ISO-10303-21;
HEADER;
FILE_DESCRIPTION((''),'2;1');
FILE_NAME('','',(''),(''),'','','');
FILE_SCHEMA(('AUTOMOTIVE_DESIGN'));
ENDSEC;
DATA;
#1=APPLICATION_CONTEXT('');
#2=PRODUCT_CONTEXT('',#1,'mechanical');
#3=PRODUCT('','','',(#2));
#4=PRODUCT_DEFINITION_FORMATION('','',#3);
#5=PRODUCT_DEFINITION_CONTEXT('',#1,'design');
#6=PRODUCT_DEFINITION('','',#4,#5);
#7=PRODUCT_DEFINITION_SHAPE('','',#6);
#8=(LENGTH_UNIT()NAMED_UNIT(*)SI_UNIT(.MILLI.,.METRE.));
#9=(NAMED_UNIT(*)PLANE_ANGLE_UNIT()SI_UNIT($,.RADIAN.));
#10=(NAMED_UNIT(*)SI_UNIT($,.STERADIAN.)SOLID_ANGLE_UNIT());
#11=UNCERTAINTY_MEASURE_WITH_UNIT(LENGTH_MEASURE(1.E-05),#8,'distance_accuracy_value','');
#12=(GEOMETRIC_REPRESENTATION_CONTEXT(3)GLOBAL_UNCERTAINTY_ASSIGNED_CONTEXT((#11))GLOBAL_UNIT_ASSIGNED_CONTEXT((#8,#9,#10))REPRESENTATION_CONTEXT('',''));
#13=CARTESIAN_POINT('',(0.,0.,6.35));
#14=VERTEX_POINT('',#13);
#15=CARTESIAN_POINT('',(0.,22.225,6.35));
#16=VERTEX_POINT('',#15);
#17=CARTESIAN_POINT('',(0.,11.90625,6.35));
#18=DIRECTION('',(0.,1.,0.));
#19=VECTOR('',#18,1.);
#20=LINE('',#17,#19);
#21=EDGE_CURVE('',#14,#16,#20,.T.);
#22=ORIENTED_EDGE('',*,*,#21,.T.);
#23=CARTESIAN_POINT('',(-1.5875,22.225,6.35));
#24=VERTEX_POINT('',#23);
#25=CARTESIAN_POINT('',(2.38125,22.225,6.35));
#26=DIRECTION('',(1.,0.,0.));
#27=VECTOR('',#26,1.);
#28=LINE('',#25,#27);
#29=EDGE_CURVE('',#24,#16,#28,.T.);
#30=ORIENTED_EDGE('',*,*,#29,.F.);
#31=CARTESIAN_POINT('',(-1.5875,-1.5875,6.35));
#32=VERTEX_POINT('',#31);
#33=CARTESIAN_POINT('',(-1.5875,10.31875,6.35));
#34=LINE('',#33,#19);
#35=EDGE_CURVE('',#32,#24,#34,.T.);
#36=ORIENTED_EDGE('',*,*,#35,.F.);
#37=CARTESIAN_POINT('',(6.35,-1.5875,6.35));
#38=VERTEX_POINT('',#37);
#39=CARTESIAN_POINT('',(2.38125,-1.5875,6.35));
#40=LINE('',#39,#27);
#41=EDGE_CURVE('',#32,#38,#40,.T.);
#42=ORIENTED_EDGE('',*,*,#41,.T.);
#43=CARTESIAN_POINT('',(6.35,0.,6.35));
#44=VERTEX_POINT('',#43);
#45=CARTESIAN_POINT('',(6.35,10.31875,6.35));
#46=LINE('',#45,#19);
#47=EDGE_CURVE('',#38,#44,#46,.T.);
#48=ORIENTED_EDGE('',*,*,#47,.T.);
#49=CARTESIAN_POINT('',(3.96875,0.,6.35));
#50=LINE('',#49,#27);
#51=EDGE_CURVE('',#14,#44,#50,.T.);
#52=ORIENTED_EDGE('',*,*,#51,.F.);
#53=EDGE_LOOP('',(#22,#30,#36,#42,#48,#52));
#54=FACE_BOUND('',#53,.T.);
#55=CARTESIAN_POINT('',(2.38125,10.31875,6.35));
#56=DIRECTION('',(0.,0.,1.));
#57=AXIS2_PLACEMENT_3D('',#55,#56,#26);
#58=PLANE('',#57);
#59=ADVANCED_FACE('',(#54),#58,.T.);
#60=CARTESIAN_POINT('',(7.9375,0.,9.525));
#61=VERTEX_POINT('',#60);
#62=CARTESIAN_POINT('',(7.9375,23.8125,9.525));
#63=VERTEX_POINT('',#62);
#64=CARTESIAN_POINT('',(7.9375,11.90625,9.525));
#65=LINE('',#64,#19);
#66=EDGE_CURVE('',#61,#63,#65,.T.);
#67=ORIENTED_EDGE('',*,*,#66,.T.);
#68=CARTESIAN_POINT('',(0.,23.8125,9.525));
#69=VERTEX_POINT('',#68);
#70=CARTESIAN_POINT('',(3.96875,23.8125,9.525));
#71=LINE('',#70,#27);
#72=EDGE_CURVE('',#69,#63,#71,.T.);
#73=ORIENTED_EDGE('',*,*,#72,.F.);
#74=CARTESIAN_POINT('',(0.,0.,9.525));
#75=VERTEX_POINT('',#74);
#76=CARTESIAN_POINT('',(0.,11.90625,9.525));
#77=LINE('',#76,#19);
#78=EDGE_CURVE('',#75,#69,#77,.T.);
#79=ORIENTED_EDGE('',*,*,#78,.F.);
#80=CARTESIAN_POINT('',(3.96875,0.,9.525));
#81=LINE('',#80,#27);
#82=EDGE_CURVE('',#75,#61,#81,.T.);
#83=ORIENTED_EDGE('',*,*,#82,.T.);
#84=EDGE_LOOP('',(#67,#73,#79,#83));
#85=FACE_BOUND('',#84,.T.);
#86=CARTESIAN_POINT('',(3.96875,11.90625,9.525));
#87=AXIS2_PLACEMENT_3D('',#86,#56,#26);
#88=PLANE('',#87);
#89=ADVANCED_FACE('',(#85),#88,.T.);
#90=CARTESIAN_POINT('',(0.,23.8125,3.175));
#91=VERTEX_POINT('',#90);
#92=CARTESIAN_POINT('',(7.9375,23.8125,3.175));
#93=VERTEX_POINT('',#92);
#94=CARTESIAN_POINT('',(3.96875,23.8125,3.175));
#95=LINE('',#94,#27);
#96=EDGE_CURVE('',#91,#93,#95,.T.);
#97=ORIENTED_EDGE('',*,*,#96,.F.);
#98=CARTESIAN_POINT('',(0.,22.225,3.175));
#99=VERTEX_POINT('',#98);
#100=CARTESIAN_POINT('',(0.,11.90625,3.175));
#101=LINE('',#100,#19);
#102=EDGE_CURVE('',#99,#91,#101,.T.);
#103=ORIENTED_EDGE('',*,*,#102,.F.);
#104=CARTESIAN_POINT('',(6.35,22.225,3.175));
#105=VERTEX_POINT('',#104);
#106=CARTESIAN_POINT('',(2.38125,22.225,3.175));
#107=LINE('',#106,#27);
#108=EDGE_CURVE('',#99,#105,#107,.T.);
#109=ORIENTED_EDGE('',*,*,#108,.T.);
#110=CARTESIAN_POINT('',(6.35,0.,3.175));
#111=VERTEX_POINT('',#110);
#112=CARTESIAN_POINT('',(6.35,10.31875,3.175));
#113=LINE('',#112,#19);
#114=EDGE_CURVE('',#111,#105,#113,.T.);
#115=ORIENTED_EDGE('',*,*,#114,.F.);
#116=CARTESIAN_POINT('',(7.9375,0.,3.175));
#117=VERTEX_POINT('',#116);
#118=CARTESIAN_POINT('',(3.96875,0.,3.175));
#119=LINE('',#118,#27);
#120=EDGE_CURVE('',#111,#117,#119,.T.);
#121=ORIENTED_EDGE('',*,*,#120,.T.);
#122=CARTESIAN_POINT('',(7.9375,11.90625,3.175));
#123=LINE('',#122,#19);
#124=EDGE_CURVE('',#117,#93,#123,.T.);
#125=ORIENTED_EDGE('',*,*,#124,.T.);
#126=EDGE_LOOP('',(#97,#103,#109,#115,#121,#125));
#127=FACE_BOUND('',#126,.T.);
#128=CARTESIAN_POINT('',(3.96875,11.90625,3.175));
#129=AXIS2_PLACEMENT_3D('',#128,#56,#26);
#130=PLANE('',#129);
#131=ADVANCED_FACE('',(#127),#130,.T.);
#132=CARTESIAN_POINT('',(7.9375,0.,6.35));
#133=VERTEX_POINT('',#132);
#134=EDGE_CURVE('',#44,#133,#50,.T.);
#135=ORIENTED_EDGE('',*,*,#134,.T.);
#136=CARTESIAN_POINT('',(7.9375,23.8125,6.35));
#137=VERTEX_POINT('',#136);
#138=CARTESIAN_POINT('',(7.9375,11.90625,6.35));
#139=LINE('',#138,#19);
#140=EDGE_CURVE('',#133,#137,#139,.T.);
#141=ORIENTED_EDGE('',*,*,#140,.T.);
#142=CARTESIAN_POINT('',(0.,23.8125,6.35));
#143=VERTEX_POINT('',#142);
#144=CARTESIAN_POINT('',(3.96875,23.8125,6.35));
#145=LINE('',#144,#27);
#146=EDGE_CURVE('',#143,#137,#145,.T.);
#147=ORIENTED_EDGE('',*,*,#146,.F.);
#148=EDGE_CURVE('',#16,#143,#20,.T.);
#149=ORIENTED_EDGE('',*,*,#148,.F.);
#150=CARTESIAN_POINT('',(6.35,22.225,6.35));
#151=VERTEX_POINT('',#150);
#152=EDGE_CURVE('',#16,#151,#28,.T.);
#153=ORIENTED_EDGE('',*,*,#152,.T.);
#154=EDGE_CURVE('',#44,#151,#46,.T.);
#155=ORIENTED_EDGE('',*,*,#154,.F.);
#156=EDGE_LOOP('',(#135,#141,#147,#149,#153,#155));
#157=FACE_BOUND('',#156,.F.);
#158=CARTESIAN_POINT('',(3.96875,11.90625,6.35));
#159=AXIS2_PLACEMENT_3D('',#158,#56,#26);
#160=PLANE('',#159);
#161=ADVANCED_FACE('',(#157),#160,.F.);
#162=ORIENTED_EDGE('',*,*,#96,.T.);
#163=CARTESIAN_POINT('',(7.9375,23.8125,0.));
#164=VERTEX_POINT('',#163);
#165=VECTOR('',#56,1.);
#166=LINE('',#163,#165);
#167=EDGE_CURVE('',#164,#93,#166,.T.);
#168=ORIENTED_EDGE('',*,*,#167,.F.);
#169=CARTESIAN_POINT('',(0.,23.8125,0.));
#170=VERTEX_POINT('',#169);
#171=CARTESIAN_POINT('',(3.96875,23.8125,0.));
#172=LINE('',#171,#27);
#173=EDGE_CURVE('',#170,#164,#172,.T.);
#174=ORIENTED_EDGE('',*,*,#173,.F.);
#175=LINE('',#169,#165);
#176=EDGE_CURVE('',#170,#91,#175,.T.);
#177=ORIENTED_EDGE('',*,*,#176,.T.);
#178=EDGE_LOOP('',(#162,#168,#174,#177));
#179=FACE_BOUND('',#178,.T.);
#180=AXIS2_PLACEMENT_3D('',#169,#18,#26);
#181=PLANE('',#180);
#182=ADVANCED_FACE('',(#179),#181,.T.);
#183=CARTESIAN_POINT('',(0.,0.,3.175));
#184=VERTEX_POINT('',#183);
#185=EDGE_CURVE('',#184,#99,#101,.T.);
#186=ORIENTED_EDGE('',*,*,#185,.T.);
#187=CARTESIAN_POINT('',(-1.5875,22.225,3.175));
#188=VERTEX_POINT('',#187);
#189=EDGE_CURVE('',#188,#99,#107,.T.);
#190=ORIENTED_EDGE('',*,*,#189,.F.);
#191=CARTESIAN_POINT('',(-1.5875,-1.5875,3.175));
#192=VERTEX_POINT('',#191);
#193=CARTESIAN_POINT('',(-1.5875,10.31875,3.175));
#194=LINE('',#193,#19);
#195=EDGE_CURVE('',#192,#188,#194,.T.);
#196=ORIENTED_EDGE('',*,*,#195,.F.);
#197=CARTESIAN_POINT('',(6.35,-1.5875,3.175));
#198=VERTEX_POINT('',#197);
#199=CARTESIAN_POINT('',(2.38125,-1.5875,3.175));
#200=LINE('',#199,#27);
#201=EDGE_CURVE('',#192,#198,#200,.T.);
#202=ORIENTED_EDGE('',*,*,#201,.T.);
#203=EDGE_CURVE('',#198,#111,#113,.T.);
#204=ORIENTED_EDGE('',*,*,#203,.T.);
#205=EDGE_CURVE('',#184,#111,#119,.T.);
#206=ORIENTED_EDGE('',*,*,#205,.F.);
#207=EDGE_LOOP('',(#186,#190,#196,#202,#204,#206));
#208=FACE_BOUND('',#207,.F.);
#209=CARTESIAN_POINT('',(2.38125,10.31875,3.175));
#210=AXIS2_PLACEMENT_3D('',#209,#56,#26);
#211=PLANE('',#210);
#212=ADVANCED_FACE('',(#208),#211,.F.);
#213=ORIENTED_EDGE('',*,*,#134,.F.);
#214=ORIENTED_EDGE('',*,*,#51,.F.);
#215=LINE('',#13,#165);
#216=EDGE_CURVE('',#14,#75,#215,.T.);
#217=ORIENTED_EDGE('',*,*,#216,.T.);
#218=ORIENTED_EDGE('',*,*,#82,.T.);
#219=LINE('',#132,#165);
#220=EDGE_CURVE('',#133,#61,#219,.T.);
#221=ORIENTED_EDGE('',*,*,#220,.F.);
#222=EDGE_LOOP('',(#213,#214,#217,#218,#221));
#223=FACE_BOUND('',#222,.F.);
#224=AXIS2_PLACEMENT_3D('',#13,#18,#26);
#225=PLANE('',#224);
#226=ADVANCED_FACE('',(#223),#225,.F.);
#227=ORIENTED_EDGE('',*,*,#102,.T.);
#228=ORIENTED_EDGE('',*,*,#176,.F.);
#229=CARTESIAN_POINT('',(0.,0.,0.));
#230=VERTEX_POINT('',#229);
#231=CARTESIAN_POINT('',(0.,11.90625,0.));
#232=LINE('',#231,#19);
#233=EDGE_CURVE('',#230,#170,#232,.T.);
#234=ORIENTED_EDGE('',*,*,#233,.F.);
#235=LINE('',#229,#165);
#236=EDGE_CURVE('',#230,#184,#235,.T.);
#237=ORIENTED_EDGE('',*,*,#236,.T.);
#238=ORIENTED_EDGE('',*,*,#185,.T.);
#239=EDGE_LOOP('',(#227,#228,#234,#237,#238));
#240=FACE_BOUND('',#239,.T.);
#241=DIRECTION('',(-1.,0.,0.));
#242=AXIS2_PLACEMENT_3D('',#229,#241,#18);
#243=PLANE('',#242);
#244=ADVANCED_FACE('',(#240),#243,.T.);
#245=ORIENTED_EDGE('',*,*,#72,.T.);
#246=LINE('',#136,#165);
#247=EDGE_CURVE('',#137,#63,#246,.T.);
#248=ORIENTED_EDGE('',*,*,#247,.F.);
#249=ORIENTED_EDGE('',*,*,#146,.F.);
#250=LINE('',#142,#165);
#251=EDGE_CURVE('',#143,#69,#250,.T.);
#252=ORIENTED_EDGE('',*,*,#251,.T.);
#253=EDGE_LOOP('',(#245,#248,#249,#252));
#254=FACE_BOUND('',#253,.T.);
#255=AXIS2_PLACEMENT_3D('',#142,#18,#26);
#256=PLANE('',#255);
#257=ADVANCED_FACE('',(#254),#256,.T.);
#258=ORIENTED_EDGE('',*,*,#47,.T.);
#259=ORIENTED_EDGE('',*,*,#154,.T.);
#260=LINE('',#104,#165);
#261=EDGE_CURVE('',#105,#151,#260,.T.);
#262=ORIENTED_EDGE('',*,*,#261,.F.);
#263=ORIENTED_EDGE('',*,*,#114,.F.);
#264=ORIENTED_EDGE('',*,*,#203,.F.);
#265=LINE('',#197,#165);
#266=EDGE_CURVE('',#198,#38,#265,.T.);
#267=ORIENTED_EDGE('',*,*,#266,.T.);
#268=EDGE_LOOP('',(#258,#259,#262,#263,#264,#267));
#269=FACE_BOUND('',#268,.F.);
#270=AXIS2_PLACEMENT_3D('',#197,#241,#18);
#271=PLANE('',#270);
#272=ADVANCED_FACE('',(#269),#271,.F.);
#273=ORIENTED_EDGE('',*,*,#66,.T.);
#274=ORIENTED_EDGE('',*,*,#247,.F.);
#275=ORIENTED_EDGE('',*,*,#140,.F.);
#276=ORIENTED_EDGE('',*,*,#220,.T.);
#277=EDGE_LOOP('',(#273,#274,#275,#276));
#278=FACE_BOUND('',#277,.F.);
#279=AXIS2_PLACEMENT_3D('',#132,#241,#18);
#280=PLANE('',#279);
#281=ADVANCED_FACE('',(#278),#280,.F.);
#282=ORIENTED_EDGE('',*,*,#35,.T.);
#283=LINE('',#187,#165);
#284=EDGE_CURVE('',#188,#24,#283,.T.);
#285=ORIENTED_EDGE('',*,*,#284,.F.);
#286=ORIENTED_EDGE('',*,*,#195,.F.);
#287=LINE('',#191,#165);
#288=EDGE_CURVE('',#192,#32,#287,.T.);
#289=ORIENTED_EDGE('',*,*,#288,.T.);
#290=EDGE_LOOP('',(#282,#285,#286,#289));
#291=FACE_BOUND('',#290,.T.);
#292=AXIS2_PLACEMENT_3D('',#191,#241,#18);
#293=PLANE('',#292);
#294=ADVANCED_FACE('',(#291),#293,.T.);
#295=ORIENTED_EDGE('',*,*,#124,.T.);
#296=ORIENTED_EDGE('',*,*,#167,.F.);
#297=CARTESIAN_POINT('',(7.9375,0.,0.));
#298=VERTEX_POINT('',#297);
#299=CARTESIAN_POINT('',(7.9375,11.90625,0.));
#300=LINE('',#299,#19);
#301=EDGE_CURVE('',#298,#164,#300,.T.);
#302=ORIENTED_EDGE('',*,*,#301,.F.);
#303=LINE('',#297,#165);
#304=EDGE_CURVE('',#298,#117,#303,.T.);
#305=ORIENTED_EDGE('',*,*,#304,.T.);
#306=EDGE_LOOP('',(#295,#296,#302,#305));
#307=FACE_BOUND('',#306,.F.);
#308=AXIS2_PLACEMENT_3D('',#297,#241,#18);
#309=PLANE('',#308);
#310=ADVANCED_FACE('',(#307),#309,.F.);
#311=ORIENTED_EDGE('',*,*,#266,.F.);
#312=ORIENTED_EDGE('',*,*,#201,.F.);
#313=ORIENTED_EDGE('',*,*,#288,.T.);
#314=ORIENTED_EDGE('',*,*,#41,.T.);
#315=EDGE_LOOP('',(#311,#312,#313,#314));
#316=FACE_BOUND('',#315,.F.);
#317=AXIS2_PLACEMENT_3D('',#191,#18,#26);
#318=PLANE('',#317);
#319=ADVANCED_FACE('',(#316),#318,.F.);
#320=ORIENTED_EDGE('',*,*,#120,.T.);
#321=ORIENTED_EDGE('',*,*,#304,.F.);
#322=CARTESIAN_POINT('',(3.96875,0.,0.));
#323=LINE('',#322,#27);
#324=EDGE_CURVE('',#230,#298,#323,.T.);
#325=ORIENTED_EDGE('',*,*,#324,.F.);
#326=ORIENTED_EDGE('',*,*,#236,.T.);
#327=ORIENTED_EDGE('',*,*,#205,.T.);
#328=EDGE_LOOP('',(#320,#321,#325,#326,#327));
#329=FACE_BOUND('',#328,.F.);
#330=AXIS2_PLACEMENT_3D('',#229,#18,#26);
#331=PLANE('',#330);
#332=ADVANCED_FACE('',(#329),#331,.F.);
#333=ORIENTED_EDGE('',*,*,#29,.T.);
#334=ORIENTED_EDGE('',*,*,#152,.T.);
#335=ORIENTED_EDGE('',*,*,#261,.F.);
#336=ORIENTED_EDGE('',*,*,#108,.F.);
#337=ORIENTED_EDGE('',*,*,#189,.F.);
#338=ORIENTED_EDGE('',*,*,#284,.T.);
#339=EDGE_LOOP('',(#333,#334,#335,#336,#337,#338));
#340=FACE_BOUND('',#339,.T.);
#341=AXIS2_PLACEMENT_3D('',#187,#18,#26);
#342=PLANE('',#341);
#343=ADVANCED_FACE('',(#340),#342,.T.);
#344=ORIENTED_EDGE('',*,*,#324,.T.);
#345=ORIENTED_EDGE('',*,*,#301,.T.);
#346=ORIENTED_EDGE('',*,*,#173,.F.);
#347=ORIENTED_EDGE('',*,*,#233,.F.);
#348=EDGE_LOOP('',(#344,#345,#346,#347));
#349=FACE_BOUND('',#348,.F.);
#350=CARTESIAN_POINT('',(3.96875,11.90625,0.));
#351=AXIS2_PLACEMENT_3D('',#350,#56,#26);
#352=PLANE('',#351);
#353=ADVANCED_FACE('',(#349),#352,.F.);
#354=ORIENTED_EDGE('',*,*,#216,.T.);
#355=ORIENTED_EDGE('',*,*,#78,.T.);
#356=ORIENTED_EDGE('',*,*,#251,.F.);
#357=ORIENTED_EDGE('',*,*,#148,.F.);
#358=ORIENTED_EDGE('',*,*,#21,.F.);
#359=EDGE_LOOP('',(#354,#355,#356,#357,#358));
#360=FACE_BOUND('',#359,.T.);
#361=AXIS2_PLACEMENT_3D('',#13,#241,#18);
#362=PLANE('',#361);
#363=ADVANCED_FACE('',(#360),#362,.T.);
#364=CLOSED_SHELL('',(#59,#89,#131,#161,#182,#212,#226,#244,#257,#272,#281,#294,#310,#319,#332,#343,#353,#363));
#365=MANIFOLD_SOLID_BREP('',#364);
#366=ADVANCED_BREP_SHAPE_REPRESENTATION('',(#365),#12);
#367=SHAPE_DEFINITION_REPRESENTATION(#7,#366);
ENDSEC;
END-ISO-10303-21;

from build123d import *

# Parameters (mm, degrees)
F2_W     = 7.9375
F2_H     = 23.8125
F3_DEPTH = 3.175
F4_W     = 7.9375
F4_H     = 23.8125
F5_DEPTH = 3.175
F6_W     = 7.9375
F6_H     = 23.8125
F7_DEPTH = 3.175


# Not quite as in the source:
# - a variable given as a bare number and used for a length is read in inches; the dataset says mm whatever the document's units were


with BuildPart() as f3:
    # F2 (on Top) → F3 (new body)
    with BuildSketch(Plane.XY):
        with Locations((3.96875, 11.90625)):
            Rectangle(F2_W, F2_H)
    extrude(amount=F3_DEPTH)

    # F4 (on face) → F5 (join)
    with BuildSketch(Plane.XY.offset(3.175)):
        with Locations((2.38125, 10.31875)):
            Rectangle(F4_W, F4_H)
    extrude(amount=F5_DEPTH)

    # F6 (on face) → F7 (join)
    with BuildSketch(Plane.XY.offset(6.35)):
        with Locations((3.96875, 11.90625)):
            Rectangle(F6_W, F6_H)
    extrude(amount=F7_DEPTH)


solid = f3.part
